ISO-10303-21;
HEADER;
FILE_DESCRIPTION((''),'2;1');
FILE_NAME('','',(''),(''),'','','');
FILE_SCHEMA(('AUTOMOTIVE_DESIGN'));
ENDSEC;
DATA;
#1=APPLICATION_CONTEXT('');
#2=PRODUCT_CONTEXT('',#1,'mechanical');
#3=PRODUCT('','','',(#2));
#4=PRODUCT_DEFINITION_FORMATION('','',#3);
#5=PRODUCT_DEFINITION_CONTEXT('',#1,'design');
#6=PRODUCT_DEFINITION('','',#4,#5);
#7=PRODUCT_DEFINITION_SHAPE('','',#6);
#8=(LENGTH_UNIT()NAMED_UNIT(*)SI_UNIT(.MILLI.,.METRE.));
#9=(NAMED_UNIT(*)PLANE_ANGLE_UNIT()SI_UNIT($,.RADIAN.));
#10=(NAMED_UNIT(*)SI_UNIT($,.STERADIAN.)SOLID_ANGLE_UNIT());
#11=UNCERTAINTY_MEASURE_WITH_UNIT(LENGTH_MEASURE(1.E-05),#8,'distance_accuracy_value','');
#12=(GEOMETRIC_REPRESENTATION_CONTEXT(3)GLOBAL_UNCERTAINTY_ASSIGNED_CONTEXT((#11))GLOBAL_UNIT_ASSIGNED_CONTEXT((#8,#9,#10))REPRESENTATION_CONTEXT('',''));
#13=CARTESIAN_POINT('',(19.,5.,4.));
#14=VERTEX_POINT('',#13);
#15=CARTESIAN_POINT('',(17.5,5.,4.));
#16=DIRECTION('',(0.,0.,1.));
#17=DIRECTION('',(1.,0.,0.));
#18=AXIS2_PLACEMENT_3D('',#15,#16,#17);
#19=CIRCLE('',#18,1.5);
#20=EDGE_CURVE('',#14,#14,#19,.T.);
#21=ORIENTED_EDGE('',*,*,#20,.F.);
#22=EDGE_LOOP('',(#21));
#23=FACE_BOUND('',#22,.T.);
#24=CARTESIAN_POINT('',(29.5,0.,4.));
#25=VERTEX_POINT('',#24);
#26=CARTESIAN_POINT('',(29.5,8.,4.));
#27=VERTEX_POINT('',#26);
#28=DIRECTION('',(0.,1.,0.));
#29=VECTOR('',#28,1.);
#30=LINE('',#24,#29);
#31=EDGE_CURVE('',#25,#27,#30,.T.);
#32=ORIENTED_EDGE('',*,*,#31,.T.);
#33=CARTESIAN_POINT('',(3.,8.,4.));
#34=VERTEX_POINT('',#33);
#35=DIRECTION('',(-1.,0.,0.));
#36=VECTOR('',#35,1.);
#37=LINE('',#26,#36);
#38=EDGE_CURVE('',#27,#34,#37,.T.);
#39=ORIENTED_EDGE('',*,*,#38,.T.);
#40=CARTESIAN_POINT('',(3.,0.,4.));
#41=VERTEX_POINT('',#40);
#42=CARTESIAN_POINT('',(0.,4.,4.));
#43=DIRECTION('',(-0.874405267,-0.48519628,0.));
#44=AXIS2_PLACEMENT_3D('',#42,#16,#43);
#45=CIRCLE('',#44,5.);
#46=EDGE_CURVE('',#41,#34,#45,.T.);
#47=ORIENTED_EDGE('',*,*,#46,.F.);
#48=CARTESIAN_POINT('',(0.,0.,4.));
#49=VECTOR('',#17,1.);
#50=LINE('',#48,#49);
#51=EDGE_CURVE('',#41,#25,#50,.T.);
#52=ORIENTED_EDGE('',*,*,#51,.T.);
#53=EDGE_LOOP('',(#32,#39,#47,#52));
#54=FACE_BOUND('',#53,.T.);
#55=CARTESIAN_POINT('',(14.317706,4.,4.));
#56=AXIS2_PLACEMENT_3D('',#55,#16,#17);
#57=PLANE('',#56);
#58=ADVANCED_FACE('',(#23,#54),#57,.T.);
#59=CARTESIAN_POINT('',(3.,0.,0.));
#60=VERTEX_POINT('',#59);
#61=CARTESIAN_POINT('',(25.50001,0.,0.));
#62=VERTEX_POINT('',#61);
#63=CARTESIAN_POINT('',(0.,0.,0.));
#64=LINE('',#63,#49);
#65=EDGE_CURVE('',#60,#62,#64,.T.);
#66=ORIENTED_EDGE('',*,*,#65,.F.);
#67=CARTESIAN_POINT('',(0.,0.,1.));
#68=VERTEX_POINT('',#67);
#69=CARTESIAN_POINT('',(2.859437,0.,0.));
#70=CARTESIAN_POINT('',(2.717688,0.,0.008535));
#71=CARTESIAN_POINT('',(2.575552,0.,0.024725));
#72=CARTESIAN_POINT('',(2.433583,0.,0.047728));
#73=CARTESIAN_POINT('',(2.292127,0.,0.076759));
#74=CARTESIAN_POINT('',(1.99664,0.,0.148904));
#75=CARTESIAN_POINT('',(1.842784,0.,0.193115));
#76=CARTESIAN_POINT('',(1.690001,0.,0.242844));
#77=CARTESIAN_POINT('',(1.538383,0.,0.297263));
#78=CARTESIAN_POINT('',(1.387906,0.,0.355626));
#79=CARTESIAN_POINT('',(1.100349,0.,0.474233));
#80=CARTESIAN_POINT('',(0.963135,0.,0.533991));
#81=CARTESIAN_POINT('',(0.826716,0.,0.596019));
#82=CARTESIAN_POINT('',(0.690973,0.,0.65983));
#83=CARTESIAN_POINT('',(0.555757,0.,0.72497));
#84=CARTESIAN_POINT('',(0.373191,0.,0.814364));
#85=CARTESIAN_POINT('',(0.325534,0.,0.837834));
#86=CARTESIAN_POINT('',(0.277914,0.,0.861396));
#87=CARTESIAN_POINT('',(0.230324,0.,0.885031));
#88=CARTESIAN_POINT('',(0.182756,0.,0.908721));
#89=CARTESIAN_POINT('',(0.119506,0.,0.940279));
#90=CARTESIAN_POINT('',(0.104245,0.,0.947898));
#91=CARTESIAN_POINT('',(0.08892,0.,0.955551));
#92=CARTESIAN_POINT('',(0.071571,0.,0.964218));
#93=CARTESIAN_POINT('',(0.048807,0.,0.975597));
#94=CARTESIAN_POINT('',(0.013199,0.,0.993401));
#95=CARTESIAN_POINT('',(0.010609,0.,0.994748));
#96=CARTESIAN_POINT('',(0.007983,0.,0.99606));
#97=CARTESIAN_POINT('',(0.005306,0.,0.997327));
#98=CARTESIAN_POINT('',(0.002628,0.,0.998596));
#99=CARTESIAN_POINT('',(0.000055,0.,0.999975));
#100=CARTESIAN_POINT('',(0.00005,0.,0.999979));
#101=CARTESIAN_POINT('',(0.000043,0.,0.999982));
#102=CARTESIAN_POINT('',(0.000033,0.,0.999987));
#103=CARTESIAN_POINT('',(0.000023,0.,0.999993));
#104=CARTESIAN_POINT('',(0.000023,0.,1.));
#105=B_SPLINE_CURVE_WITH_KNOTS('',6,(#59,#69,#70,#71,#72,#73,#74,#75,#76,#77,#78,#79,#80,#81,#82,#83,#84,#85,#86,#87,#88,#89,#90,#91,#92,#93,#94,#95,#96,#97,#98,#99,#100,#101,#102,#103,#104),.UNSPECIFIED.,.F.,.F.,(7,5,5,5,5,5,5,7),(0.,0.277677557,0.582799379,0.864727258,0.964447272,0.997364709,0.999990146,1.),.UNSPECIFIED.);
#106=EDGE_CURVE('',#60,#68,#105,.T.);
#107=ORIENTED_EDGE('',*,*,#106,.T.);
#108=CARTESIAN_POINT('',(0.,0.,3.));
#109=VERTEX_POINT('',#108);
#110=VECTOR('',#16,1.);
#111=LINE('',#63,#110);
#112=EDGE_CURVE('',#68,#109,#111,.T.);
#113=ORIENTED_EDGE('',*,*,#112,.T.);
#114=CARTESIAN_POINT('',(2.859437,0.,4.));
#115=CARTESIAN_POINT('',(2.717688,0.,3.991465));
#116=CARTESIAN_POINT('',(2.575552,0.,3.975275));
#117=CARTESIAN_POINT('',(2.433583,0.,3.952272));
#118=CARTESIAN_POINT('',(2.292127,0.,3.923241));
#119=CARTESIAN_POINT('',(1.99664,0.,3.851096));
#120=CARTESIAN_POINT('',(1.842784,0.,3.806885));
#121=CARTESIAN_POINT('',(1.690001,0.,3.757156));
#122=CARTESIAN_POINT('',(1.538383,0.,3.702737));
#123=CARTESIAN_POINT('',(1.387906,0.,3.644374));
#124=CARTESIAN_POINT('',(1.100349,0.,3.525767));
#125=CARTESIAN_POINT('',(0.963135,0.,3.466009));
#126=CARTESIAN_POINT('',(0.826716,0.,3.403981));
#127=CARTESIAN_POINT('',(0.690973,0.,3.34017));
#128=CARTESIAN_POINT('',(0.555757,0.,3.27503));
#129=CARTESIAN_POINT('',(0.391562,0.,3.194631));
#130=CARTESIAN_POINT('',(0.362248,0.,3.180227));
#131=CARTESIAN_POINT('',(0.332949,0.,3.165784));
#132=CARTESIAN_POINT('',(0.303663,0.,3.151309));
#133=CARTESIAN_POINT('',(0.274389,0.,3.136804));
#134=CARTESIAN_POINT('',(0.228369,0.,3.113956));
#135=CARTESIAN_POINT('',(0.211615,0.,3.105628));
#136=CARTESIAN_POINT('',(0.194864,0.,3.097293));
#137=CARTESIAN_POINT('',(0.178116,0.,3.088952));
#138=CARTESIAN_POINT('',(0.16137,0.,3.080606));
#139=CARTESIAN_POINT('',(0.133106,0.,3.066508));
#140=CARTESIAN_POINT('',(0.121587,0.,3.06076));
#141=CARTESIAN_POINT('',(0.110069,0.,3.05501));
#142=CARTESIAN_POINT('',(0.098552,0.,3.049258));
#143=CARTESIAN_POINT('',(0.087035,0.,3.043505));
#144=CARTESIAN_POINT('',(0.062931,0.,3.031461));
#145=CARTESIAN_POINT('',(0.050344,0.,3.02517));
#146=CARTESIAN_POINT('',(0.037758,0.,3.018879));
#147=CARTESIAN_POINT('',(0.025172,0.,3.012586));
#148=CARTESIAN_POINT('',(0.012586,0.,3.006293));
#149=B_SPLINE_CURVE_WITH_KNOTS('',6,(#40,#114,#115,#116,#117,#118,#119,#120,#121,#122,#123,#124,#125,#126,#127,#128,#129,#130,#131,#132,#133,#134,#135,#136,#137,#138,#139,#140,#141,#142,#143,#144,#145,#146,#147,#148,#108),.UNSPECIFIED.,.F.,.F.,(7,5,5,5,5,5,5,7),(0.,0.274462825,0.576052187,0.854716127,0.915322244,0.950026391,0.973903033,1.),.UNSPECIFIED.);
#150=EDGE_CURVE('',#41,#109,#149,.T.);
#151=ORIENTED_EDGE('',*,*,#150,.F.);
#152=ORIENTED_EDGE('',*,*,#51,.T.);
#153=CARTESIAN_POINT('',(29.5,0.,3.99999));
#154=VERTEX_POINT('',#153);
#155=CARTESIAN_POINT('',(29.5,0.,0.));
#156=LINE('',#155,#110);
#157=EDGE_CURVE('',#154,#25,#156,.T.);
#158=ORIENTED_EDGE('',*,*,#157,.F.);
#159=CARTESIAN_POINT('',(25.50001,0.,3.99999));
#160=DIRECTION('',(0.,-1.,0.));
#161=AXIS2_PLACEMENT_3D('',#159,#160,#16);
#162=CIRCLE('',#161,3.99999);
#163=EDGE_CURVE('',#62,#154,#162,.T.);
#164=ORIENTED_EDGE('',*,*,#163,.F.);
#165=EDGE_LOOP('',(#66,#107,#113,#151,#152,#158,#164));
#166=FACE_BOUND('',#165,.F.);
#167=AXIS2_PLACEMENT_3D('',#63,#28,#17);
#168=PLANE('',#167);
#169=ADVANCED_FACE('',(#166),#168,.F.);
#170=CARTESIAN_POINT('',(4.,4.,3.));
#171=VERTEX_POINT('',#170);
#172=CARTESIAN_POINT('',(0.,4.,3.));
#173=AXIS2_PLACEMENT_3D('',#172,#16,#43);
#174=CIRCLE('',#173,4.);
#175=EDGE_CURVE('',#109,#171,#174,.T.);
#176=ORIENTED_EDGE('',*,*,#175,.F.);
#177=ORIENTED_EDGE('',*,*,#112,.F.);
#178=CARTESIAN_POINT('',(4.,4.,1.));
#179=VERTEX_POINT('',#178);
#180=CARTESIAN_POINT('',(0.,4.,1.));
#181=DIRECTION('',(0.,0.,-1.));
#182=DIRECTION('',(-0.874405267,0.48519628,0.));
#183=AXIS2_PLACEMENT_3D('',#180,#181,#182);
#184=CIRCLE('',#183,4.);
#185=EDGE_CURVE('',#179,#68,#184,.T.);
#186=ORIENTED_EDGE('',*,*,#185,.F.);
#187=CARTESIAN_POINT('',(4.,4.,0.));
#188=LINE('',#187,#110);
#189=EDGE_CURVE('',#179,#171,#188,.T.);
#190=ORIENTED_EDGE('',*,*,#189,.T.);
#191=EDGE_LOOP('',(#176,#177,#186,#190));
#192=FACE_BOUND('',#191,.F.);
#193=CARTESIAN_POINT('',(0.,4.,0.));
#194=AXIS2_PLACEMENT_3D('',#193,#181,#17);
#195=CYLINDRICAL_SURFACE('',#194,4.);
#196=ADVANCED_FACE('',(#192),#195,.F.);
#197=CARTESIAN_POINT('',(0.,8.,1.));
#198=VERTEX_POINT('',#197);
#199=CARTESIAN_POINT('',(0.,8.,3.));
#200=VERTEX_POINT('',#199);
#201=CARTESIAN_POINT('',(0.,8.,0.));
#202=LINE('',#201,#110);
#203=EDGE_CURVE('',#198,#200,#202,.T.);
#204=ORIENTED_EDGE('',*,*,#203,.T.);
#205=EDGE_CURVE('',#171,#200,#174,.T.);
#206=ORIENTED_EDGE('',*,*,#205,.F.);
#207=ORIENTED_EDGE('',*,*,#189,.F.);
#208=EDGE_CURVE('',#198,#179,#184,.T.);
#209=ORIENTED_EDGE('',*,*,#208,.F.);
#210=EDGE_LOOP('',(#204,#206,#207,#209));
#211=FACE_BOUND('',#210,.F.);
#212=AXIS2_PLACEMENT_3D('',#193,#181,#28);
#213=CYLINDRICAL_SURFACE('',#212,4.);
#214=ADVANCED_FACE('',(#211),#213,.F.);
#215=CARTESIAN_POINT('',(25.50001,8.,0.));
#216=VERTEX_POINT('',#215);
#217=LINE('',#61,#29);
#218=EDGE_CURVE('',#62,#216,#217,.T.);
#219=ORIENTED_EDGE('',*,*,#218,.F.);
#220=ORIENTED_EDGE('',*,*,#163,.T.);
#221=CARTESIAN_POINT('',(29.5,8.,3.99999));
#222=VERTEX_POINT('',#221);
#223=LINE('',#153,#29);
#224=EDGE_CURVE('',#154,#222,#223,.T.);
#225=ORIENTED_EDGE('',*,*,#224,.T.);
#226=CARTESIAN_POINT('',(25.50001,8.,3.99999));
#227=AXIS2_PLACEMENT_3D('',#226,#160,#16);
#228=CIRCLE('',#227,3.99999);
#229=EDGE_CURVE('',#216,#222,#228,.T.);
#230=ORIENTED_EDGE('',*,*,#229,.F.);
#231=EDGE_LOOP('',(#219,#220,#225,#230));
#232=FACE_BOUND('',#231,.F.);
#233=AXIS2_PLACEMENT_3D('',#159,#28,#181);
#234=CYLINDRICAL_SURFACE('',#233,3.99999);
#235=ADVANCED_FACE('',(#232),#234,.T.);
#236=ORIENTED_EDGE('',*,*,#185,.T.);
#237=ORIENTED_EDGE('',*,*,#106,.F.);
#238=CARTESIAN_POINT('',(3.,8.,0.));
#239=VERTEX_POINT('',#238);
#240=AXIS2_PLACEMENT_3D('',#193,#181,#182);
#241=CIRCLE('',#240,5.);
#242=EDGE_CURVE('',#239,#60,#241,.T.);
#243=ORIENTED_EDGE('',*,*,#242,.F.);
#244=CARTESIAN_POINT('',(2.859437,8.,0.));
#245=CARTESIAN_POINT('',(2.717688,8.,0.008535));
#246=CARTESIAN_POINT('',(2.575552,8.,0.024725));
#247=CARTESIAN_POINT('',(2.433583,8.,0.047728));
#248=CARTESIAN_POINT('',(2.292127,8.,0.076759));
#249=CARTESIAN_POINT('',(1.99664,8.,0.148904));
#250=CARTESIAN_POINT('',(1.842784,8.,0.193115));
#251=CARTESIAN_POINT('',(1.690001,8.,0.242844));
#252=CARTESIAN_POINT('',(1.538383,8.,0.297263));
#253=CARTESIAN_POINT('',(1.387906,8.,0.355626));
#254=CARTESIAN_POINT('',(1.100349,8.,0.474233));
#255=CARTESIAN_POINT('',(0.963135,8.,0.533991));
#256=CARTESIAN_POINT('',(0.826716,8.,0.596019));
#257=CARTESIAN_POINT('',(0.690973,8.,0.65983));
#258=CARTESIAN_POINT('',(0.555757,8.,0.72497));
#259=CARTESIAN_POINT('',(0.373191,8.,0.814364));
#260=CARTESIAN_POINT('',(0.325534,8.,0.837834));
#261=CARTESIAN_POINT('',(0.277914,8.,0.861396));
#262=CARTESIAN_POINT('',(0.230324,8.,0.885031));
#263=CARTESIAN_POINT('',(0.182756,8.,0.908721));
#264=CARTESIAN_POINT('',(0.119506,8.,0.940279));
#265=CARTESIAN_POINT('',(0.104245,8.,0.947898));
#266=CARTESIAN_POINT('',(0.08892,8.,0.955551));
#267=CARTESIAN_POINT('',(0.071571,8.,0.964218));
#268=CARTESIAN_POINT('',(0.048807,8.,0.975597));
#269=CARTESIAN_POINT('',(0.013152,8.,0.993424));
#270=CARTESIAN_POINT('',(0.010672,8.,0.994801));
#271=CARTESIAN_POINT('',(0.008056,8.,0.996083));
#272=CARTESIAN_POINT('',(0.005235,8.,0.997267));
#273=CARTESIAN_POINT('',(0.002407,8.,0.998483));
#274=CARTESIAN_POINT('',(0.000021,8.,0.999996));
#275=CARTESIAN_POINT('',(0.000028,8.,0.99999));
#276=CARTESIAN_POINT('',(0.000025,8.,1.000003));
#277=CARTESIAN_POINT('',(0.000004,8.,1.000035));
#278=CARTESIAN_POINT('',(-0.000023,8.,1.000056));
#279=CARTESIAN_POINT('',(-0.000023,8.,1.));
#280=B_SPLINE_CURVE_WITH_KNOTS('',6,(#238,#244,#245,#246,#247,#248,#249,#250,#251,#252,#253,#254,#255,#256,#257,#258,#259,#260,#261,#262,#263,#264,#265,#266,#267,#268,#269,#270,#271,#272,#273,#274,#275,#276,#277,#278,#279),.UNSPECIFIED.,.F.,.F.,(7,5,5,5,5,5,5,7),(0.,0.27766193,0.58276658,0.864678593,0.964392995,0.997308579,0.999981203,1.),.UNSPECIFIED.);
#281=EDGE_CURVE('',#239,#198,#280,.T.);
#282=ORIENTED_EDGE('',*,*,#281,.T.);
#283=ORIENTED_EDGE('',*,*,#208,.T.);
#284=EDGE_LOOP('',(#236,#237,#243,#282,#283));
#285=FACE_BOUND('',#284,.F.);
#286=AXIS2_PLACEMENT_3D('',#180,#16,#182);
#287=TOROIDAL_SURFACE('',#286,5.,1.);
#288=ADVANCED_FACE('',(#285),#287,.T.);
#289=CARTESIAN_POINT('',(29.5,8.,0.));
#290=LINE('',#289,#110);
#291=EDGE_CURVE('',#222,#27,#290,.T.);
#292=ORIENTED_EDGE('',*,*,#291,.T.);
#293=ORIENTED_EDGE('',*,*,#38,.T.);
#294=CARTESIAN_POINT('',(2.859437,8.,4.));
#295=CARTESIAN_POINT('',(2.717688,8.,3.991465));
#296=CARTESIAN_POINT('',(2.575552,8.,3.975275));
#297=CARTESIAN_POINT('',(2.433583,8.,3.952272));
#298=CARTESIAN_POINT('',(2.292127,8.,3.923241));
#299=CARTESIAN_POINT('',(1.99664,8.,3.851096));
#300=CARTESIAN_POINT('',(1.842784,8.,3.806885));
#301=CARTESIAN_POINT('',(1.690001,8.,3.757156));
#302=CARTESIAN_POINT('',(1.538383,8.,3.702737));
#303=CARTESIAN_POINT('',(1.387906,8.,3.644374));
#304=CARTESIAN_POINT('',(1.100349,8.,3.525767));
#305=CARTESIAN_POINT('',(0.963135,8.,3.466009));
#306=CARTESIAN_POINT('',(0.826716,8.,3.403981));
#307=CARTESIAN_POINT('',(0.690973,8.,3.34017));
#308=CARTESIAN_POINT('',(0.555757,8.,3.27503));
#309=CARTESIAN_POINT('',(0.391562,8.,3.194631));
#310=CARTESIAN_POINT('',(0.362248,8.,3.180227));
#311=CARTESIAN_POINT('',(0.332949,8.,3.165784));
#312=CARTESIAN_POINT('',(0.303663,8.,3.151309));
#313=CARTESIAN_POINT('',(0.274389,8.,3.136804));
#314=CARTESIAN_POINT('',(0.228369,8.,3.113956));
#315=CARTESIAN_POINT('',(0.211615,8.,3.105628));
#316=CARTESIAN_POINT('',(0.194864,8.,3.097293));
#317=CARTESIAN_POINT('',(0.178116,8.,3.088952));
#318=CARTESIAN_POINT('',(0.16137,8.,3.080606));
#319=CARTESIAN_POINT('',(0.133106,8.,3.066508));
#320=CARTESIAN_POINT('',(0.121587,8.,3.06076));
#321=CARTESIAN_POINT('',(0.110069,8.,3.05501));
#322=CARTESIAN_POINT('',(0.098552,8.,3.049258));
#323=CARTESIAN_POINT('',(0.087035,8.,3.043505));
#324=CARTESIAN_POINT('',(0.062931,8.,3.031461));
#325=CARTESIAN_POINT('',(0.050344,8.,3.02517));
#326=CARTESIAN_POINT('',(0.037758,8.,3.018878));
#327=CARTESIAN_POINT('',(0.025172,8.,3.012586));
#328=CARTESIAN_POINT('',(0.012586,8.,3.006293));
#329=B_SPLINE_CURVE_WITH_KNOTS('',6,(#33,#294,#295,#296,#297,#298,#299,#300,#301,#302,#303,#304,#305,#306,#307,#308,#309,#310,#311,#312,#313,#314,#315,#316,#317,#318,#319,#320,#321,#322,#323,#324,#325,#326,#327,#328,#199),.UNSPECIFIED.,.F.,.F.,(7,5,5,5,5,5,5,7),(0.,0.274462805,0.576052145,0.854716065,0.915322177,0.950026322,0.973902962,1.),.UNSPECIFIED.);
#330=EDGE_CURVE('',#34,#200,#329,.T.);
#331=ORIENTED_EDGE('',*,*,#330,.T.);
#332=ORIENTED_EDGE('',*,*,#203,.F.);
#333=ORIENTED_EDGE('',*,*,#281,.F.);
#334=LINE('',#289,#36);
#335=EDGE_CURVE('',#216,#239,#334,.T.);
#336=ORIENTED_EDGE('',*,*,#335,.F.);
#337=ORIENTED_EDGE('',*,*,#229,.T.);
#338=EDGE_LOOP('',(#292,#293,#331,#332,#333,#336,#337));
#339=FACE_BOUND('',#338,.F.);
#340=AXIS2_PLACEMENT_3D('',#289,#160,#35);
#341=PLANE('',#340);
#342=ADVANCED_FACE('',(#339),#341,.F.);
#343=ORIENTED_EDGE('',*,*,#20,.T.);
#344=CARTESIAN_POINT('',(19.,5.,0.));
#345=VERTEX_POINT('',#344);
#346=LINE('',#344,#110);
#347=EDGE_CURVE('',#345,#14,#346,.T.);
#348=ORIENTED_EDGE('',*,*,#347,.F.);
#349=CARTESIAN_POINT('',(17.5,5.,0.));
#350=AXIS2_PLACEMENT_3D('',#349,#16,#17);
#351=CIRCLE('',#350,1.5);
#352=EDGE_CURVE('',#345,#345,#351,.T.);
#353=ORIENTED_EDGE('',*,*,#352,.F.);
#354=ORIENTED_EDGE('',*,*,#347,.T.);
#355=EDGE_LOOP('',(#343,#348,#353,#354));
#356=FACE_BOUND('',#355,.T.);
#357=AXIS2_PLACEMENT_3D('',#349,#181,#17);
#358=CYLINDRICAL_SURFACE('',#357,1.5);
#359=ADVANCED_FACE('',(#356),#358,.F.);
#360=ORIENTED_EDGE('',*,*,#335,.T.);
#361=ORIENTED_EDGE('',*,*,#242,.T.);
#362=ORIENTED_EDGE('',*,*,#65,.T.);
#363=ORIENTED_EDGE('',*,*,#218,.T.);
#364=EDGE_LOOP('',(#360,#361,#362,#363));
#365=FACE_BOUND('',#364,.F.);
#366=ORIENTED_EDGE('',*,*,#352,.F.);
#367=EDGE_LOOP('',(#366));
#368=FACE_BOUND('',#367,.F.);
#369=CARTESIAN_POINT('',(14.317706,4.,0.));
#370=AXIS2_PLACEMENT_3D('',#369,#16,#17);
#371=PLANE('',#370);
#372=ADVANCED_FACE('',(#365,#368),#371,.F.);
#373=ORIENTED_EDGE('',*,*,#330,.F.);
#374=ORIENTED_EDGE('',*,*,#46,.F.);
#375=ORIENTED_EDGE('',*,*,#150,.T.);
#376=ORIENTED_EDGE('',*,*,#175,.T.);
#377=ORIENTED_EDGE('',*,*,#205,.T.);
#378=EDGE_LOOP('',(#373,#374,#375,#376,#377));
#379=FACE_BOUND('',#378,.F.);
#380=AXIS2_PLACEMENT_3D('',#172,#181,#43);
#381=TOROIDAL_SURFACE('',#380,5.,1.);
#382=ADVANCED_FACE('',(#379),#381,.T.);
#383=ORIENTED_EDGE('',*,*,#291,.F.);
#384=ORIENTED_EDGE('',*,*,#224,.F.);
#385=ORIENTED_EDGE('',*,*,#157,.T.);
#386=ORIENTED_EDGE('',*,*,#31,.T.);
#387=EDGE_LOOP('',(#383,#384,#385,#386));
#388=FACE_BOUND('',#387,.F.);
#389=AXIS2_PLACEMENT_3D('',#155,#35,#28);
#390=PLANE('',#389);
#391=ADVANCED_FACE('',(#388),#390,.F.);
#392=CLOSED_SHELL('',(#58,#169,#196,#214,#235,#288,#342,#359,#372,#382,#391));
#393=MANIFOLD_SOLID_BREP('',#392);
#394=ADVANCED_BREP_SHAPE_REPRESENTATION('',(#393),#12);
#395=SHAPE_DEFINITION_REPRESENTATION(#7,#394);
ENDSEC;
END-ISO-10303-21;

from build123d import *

# Parameters (mm, degrees)
F0_R        = 1.5
F1_DEPTH    = 4
F2_T2_ANGLE = 301.9493341655
F2_T4_ANGLE = 301.9493341655
F3_R        = 3.99999


# Not quite as in the source:
# - a fillet or chamfer that OpenCascade refuses, or shapes differently, is made with other operations: its cross-section is extruded or revolved along the edge and cut away or added
# - a fillet or chamfer is up to 0.001 mm smaller than in the source, because OpenCascade refuses the exact size


with BuildPart() as f1:
    # F0 (on Top) → F1 (new body)
    with BuildSketch(Plane.XY):
        with BuildLine():
            ThreePointArc((0, 8), (2.8284271247, 6.8284271247), (4, 4))
            ThreePointArc((4, 4), (2.8284271247, 1.1715728753), (0, 0))
            Line((0, 0), (29.5, 0))
            Line((29.5, 0), (29.5, 8))
            Line((29.5, 8), (0, 8))
        make_face()
        with Locations((17.5, 5)):
            Circle(F0_R, mode=Mode.SUBTRACT)
    extrude(amount=F1_DEPTH)

    # F2: fillet of radius 1 on 2 edges, made by hand

    # F2_s1 → F2_t2 (revolve, cut)
    with BuildSketch(Plane(origin=(1.697032729, 3.0583382808, 0), x_dir=(0, 0, 1), z_dir=(-0.4851962797, -0.8744052666, 0))):
        with BuildLine():
            ThreePointArc((1, 5.9407851187), (0.2928932188, 6.2336783375), (0, 6.9407851187))
            Line((0, 6.9407851187), (0, 5.9407851187))
            Line((0, 5.9407851187), (1, 5.9407851187))
        make_face()
    revolve(axis=Axis((0, 4, 0), (0, 0, -1)), revolution_arc=F2_T2_ANGLE, mode=Mode.SUBTRACT)

    # F2_s3 → F2_t4 (revolve, cut)
    with BuildSketch(Plane(origin=(-1.697032729, 3.0583382808, 0), x_dir=(0, 0, 1), z_dir=(-0.4851962797, 0.8744052666, 0))):
        with BuildLine():
            ThreePointArc((3, -2.0592148813), (3.7071067812, -2.3521081002), (4, -3.0592148813))
            Line((4, -3.0592148813), (4, -2.0592148813))
            Line((4, -2.0592148813), (3, -2.0592148813))
        make_face()
    revolve(axis=Axis((0, 4, 4), (0, 0, 1)), revolution_arc=F2_T4_ANGLE, mode=Mode.SUBTRACT)

    # F3 (radius 4 in the source; OpenCascade refuses exactly that, so slightly less here)
    f3_edges = [f1.edges().sort_by_distance(p)[0] for p in [
        (29.5, 4, 0),
    ]]
    fillet(f3_edges, radius=F3_R)


solid = f1.part
